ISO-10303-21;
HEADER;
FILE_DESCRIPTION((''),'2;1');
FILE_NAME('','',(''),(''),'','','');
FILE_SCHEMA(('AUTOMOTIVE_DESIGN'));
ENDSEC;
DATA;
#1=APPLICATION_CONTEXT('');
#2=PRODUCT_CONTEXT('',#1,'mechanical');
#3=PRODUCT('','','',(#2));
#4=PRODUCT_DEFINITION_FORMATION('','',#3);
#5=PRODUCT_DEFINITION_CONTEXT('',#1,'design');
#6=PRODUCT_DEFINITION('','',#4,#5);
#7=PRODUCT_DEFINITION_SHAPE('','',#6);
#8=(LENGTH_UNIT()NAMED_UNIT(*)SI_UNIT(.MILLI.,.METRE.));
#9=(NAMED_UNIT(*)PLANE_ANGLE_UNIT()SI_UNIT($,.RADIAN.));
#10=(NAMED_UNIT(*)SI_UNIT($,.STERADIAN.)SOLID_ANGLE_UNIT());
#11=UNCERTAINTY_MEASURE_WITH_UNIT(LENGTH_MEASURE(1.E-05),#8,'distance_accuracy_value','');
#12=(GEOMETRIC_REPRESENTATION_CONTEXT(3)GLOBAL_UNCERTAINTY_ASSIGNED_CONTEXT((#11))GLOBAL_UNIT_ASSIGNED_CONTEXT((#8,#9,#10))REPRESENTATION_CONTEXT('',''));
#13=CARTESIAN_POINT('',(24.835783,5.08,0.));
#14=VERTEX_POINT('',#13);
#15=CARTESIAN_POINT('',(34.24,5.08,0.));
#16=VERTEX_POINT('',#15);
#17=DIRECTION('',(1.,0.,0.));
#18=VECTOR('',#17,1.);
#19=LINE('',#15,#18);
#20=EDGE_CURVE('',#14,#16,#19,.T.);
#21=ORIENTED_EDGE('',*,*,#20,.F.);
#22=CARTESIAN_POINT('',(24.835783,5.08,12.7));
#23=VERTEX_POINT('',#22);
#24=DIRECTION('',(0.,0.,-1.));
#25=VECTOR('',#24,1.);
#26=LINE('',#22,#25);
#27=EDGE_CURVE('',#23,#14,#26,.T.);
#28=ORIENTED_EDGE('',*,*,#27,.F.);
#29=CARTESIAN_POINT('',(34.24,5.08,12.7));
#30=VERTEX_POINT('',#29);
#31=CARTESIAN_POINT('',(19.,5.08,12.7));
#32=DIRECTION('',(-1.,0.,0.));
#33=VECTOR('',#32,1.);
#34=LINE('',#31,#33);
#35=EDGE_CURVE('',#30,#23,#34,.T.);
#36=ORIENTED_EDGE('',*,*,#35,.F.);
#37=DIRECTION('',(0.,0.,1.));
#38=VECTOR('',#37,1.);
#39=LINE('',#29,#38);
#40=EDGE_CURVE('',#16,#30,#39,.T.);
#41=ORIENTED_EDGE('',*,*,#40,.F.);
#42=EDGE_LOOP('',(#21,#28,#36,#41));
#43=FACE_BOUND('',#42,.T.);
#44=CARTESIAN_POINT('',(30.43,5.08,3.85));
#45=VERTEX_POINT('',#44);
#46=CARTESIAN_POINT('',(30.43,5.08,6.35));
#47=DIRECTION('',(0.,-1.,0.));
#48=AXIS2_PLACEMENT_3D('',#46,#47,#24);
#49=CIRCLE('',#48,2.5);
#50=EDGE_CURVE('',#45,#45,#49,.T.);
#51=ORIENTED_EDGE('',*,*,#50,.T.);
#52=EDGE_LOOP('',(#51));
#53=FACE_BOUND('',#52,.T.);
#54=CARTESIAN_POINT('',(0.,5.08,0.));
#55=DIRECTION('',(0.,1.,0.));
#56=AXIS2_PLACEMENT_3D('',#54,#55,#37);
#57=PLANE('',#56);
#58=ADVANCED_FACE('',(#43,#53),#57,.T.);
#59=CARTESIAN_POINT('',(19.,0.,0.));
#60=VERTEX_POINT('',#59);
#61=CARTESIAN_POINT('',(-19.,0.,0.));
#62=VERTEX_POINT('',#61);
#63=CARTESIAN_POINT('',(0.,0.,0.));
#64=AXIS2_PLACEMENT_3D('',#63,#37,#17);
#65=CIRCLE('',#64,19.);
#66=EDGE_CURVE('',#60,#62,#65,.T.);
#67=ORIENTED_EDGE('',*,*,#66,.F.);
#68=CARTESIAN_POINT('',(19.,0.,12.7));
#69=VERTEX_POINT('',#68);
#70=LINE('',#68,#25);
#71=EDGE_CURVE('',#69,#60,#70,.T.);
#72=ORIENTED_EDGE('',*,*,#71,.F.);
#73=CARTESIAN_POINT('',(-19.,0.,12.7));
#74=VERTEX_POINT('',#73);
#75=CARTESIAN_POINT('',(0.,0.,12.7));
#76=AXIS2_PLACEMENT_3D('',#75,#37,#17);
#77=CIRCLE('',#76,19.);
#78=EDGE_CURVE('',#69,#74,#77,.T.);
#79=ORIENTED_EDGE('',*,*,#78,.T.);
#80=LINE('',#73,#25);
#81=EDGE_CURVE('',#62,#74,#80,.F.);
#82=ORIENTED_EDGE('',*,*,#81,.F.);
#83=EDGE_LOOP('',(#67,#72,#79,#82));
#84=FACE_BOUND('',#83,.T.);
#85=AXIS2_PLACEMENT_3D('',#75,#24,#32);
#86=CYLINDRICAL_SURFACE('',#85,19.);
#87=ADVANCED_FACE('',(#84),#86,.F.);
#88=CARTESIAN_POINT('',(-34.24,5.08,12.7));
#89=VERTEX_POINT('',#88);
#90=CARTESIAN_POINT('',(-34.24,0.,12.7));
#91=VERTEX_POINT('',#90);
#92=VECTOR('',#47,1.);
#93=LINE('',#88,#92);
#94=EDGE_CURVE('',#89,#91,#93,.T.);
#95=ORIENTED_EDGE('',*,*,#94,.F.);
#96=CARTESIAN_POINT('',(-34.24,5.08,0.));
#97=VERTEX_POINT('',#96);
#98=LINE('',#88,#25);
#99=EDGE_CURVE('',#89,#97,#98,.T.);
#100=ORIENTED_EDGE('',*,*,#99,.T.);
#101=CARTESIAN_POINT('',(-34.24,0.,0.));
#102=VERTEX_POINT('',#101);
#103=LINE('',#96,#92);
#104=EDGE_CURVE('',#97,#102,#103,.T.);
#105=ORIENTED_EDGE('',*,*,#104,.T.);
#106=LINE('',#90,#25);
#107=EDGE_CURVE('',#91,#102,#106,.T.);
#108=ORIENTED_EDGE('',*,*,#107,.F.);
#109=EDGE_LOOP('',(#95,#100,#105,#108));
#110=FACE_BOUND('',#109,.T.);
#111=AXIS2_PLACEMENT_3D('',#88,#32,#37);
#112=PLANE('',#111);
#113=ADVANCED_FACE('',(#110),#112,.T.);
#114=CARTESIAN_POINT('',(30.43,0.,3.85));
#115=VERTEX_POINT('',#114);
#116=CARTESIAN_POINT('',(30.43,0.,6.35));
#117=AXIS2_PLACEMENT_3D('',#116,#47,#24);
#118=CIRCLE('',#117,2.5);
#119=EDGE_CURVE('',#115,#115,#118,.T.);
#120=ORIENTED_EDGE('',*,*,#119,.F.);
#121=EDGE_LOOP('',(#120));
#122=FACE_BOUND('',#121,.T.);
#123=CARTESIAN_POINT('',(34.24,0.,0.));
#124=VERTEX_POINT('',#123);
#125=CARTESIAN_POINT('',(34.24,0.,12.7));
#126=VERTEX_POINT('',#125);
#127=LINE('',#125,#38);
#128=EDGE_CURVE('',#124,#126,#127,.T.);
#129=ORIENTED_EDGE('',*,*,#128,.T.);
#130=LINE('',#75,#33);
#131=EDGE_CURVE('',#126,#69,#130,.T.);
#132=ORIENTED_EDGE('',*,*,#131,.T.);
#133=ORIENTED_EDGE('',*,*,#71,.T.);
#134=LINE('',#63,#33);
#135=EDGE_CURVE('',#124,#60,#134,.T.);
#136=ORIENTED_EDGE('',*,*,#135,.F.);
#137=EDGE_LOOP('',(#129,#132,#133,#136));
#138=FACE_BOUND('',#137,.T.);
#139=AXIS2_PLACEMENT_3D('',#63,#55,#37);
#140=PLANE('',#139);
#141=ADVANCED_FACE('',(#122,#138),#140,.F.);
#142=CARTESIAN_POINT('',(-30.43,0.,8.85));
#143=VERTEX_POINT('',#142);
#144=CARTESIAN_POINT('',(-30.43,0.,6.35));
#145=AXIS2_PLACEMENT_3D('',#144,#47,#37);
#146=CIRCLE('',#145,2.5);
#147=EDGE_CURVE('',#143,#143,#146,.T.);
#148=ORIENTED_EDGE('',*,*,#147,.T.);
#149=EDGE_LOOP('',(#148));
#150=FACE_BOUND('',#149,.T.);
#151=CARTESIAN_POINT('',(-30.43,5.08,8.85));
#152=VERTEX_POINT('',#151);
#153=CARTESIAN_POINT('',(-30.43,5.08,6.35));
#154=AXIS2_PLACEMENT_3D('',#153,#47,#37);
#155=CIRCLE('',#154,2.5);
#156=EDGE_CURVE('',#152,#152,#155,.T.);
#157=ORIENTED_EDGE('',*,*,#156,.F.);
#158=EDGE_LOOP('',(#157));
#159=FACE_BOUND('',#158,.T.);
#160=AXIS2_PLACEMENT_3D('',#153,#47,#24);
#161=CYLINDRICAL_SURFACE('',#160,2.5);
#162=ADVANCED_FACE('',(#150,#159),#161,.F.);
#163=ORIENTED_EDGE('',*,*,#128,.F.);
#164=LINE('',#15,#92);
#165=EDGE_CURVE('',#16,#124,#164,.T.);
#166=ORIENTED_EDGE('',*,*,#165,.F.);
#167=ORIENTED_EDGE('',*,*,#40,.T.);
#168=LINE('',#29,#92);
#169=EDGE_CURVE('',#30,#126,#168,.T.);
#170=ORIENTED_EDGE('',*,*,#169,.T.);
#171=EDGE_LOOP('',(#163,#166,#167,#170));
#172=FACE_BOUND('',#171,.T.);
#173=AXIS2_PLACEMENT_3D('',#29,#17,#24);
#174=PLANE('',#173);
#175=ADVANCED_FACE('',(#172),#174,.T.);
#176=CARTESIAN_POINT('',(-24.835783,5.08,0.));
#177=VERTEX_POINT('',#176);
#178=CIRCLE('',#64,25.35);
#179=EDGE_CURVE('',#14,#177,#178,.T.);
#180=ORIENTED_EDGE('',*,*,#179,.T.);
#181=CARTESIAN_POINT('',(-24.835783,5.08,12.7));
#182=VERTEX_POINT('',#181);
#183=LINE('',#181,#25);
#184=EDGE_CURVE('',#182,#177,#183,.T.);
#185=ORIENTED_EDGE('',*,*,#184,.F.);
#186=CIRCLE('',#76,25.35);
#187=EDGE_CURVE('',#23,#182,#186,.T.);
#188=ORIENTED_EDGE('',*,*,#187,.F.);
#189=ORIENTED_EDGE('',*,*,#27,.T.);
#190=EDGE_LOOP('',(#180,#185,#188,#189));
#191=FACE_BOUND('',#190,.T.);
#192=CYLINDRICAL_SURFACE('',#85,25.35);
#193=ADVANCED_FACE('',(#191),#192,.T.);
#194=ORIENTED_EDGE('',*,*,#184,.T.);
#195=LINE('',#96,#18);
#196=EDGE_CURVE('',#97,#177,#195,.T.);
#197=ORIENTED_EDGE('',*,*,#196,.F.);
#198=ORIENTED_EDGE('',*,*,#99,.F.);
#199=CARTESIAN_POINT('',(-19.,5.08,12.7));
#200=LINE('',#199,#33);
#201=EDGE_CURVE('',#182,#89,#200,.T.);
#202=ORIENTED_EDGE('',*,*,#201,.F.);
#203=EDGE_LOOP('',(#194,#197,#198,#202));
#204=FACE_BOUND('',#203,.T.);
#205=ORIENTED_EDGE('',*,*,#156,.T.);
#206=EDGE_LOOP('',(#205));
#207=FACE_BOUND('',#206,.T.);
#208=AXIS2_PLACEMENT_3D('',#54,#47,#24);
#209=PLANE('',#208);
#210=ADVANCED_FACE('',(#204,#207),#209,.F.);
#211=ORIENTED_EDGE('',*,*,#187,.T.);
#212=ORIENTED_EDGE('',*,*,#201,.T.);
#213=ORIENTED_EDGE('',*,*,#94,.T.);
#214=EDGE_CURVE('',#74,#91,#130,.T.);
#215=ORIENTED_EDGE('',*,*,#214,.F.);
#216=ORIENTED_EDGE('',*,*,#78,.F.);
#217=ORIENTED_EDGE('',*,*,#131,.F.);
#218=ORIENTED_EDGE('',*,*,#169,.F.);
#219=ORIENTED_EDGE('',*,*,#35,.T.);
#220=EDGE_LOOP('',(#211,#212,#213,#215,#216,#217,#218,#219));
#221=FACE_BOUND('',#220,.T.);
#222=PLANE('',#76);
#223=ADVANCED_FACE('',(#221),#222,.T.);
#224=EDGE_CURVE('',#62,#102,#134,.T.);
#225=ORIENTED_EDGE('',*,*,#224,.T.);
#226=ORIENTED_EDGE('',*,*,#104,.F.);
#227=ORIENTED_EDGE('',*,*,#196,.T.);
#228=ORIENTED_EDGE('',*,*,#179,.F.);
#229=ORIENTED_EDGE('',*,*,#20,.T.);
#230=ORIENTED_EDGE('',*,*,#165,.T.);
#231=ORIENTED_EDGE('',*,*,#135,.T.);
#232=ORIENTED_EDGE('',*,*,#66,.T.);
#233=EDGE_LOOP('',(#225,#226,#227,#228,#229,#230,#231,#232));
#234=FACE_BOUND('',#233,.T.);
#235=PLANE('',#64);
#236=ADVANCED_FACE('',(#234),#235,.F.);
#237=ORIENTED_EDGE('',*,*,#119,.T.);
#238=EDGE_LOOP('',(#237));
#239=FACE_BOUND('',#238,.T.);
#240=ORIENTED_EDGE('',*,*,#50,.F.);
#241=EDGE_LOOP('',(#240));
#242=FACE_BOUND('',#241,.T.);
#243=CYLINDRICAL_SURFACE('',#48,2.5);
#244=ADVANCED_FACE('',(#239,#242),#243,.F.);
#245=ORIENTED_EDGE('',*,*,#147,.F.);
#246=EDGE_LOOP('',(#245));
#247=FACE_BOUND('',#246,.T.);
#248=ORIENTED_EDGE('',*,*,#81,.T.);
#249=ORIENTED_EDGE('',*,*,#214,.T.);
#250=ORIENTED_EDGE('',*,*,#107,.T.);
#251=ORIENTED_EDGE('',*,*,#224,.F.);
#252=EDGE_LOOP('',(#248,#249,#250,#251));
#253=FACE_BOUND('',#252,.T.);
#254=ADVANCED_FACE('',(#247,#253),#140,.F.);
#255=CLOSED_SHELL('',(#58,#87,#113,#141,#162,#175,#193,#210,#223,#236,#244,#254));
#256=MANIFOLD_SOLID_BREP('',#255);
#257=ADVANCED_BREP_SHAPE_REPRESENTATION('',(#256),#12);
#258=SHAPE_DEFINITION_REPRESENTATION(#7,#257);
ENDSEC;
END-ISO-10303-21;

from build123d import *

# Parameters (mm, degrees)
SKETCH1_R                = 25.35
SKETCH1_R_2              = 19
BOSS_EXTRUDE1_DEPTH      = 12.7
BODY_DELETE_KEEP_1_DEPTH = 12.7
SKETCH2_W                = 15.24
SKETCH2_H                = 12.7
SKETCH2_R                = 2.5
BOSS_EXTRUDE2_DEPTH      = 5.08


# Read off the part's stored shape, not the designer's step: Body-Delete/Keep 1
with BuildPart() as part:
    # Sketch1 → Boss-Extrude1 (new body)
    with BuildSketch(Plane.XY):
        Circle(SKETCH1_R)
        Circle(SKETCH1_R_2, mode=Mode.SUBTRACT)
    extrude(amount=BOSS_EXTRUDE1_DEPTH)


with BuildPart() as body_2:
    # Split1: the piece on the far side of the plane
    add(part.part)
    split(bisect_by=Plane.ZX, keep=Keep.BOTTOM)

    # Body-Delete/Keep 1 outline → Body-Delete/Keep 1 (cut)
    with BuildSketch(Plane.XY):
        with BuildLine():
            ThreePointArc((-25.35, 0), (0, -25.35), (25.35, 0))
            Line((25.35, 0), (19, 0))
            ThreePointArc((19, 0), (0, -19), (-19, 0))
            Line((-19, 0), (-25.35, 0))
        make_face()
    extrude(amount=BODY_DELETE_KEEP_1_DEPTH, mode=Mode.SUBTRACT)


with BuildPart() as part_1:
    add(part.part)

    # Split1
    split(bisect_by=Plane.ZX, keep=Keep.TOP)

    # Sketch2 → Boss-Extrude2 (add)
    # profile 1 of 2: a face of its own
    with BuildSketch(Plane.XZ):
        with Locations((26.62, 6.35)):
            Rectangle(SKETCH2_W, SKETCH2_H)
        with Locations(Location((30.43, 6.35, 0), (0, 0, 270))):
            Circle(SKETCH2_R, mode=Mode.SUBTRACT)
    # profile 2 of 2: a face of its own
    with BuildSketch(Plane.XZ):
        with Locations((-26.62, 6.35)):
            Rectangle(SKETCH2_W, SKETCH2_H)
        with Locations(Location((-30.43, 6.35, 0), (0, 0, 90))):
            Circle(SKETCH2_R, mode=Mode.SUBTRACT)
    extrude(amount=-BOSS_EXTRUDE2_DEPTH)


solid = part_1.part
